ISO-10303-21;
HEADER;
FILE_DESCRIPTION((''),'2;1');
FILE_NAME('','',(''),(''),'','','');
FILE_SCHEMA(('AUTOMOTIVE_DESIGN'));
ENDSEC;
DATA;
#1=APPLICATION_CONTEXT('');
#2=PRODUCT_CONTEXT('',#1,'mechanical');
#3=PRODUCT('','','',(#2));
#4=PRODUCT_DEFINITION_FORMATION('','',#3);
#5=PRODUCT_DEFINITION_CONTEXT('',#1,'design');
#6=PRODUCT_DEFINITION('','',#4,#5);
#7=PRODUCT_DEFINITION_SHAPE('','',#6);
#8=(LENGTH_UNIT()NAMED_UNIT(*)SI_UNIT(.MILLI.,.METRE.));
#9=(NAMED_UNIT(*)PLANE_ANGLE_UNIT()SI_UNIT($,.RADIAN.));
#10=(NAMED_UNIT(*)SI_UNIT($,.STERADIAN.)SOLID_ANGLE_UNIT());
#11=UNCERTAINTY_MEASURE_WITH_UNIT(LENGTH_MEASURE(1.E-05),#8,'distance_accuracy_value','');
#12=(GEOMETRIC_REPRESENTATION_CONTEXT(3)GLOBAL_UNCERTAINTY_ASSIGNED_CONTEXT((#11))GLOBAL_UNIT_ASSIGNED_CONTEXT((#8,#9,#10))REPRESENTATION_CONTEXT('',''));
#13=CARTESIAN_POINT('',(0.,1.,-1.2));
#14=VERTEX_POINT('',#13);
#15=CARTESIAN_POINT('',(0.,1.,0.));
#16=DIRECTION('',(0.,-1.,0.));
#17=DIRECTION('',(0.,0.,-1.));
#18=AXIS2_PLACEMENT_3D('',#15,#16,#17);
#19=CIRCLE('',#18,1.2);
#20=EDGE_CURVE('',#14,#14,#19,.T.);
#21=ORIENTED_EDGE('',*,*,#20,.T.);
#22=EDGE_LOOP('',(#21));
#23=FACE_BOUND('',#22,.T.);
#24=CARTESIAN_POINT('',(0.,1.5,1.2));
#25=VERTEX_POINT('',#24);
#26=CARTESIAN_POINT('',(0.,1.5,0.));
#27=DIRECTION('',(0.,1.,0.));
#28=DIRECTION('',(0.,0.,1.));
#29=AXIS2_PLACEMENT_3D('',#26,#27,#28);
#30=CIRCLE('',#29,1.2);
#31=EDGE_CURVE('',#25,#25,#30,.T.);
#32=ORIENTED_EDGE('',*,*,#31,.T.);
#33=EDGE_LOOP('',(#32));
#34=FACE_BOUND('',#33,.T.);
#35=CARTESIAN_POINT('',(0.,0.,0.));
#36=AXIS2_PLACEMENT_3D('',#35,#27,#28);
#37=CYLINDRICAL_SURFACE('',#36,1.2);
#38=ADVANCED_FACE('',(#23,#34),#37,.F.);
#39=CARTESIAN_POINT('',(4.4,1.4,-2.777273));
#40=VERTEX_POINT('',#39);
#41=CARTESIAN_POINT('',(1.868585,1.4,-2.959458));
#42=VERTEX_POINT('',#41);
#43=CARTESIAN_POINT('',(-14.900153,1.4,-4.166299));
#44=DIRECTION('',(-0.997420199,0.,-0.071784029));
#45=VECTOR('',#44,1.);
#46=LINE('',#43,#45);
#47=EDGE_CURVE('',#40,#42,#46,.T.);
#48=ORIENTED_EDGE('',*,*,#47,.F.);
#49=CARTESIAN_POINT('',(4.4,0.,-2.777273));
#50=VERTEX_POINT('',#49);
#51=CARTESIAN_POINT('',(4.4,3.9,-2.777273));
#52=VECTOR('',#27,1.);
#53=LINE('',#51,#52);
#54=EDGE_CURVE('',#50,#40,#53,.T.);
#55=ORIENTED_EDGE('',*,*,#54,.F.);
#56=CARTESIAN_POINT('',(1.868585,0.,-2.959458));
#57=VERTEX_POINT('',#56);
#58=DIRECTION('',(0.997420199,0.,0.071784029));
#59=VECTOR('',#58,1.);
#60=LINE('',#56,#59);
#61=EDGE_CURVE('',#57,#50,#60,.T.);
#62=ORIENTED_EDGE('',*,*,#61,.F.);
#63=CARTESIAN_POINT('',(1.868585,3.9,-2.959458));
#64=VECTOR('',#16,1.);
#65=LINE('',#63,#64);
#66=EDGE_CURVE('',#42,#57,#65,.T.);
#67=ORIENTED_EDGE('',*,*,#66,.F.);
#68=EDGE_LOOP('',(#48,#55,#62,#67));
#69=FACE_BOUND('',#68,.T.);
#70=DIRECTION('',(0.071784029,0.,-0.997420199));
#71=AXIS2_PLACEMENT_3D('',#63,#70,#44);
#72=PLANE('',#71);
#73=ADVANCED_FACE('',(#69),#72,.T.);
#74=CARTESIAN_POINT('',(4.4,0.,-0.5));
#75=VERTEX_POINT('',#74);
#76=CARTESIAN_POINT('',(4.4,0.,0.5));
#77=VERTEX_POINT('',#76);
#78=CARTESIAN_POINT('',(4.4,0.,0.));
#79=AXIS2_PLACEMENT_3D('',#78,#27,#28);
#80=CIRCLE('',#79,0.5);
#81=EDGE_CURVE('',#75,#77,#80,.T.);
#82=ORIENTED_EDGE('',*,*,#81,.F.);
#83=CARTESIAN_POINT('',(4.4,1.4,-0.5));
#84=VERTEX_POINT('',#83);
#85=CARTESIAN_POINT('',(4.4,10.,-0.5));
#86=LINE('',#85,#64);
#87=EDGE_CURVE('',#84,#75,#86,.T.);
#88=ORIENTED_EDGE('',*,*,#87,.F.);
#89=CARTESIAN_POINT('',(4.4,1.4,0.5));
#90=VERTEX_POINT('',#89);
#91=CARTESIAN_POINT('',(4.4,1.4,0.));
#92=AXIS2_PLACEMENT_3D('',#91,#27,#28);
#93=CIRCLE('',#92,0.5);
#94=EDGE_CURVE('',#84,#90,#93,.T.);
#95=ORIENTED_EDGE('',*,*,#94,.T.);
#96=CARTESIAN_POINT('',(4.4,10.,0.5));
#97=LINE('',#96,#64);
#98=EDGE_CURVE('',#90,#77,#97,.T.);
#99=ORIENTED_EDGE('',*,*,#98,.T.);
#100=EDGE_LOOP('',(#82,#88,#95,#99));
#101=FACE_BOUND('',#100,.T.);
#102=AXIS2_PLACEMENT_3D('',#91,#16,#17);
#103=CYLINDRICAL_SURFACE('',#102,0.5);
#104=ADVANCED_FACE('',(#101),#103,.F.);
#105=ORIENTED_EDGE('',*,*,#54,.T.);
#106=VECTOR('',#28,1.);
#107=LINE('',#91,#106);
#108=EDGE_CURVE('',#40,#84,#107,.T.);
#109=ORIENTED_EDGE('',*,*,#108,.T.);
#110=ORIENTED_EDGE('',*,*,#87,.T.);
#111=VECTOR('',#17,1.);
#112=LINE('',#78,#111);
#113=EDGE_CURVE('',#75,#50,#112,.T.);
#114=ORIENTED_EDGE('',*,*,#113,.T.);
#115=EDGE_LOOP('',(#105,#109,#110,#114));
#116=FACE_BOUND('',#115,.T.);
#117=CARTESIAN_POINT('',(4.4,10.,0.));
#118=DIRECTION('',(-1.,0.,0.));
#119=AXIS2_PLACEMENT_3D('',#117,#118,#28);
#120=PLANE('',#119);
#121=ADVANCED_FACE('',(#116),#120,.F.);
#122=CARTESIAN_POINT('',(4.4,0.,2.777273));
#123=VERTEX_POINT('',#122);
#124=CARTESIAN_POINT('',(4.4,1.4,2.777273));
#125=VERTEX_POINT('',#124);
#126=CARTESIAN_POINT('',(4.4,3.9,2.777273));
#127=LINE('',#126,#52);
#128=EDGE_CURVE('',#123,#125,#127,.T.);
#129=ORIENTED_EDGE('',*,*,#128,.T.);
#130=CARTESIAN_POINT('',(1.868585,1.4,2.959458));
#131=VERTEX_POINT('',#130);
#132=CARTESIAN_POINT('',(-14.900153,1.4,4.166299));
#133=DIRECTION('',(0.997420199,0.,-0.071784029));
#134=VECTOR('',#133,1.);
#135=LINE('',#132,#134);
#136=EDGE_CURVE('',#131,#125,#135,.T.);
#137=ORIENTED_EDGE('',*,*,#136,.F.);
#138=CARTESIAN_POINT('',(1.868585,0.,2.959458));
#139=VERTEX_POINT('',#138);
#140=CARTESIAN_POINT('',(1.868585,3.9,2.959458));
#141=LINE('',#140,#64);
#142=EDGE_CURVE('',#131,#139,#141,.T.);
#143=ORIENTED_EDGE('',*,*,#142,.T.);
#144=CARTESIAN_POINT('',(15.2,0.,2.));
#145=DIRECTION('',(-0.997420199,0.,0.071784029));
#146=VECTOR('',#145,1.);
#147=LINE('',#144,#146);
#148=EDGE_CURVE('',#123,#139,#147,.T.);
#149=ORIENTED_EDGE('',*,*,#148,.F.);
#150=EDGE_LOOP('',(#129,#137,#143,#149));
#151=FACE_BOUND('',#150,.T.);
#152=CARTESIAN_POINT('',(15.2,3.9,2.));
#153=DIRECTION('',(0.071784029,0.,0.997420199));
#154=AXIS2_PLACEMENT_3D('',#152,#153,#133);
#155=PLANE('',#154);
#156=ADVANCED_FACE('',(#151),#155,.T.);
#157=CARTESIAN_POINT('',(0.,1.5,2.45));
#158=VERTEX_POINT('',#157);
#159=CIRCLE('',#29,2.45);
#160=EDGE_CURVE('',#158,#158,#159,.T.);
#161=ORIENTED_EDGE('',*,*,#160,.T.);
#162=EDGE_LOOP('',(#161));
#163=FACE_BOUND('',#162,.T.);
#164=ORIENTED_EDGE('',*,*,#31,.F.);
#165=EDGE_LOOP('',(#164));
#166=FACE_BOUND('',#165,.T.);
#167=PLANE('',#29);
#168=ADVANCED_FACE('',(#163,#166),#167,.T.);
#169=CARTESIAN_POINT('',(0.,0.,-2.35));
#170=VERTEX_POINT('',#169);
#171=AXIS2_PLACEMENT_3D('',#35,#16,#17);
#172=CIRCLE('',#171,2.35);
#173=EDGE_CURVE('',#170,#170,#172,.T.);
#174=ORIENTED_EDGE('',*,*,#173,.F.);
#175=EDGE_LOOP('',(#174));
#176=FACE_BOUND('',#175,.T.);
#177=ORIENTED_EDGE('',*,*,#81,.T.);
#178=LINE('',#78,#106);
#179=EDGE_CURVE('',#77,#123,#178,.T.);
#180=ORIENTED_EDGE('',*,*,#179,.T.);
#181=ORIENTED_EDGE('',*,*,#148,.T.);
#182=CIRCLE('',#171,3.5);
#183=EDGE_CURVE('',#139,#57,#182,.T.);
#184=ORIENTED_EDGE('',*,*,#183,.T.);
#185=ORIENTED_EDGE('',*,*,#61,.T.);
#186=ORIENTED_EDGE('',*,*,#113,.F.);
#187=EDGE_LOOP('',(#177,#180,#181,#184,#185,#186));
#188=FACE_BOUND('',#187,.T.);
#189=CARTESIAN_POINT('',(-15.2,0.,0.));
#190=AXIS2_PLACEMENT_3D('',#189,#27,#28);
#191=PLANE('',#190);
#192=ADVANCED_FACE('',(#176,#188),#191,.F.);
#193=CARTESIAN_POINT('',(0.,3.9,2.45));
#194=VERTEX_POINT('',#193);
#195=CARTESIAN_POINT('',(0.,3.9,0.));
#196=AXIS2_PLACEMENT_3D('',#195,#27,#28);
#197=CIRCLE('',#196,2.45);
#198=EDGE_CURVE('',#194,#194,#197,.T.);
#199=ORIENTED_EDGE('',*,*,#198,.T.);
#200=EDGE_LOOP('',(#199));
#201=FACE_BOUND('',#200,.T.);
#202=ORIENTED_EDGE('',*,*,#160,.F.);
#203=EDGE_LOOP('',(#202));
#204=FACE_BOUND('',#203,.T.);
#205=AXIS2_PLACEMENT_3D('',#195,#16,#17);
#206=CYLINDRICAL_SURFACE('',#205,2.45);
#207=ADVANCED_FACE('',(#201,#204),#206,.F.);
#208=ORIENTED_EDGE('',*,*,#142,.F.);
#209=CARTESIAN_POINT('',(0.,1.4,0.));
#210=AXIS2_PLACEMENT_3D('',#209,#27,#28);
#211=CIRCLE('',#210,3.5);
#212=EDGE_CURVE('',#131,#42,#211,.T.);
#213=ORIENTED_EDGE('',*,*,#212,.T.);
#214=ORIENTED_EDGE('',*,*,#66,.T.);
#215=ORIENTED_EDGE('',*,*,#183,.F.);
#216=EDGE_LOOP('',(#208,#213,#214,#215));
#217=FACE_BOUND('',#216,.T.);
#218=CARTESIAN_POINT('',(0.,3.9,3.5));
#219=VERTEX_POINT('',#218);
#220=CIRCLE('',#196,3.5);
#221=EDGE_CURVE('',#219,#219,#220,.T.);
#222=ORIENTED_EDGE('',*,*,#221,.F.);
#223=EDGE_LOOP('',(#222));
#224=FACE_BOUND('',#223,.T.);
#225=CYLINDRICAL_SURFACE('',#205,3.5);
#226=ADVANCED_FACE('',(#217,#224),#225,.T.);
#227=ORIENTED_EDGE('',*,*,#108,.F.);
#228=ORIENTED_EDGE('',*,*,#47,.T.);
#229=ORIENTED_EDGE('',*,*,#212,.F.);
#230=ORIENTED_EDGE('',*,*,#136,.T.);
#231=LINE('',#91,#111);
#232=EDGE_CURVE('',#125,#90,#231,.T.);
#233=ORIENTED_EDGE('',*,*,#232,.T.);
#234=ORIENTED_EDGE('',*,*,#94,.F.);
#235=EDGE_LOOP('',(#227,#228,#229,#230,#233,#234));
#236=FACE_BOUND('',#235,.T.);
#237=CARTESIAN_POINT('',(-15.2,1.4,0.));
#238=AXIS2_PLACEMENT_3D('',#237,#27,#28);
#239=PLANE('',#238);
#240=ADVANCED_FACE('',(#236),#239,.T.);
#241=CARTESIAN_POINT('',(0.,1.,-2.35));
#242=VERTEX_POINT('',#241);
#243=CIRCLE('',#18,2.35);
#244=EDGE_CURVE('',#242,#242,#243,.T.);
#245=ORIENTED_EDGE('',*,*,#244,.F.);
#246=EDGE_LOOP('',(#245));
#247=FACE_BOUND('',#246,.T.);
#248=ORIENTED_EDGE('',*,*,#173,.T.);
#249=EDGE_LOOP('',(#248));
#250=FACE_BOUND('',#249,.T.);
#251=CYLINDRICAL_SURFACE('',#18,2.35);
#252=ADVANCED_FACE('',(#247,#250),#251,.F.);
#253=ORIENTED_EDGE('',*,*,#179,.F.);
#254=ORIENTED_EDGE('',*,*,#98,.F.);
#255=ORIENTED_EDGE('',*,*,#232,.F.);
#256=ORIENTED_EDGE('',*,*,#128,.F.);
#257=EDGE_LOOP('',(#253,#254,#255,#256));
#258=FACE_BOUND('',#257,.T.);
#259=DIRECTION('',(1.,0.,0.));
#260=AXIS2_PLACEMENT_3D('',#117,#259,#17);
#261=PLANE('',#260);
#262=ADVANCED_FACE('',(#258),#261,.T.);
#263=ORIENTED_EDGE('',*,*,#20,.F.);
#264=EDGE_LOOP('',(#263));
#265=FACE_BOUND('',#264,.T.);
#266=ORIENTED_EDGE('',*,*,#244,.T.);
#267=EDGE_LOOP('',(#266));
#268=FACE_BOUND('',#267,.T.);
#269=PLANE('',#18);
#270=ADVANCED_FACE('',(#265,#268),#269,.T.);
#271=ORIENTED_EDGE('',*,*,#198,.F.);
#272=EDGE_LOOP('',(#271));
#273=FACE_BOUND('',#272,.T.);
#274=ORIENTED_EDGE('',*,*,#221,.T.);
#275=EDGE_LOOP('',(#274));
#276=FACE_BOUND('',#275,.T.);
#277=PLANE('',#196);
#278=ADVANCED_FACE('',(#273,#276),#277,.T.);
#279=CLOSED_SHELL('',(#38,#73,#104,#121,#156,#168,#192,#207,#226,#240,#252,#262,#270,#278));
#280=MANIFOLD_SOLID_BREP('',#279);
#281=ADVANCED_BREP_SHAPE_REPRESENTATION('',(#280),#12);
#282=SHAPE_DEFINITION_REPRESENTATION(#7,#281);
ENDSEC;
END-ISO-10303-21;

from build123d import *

# Parameters (mm, degrees)
SKETCH1_R               = 0.5
BOSS_EXTRUDE1_DEPTH     = 1.4
SKETCH2_R               = 2.35
CUT_EXTRUDE1_DEPTH      = 1
SKETCH3_R               = 3.5
SKETCH3_R_2             = 2.45
BOSS_EXTRUDE2_DEPTH     = 2.5
SKETCH4_R               = 1.2
CUT_EXTRUDE2_DEPTH      = 20.282440198
SKETCH5_R               = 2.45
SKETCH5_R_2             = 1.2
BOSS_EXTRUDE3_DEPTH     = 0.1
SKETCH6_W               = 35.735260114
SKETCH6_H               = 17.672039004
CUT_EXTRUDE4_DEPTH      = 20.513392837
CUT_EXTRUDE5_DEPTH      = 18.980545042
CUT_EXTRUDE_START       = -1.4
CUT_EXTRUDE_1_OUTLINE_R = 0.5
CUT_EXTRUDE_1_DEPTH     = 1.4


# Read off the part's stored shape, not the designer's step: 切除-拉伸-薄壁1
with BuildPart() as part:
    # Sketch1 → Boss-Extrude1 (new body)
    with BuildSketch(Plane(origin=(0, 0, 0), x_dir=(1, 0, 0), z_dir=(0, 1, 0))):
        with BuildLine():
            Line((-15.2, 2), (-2, 2.95))
            Line((-2, 2.95), (-2, 6.35))
            ThreePointArc((-2, 6.35), (0, 8.35), (2, 6.35))
            Line((2, 6.35), (2, 3.5))
            Line((2, 3.5), (15.2, 2))
            ThreePointArc((15.2, 2), (17.2, 0), (15.2, -2))
            Line((15.2, -2), (2, -3.5))
            Line((2, -3.5), (2, -6.35))
            ThreePointArc((2, -6.35), (0, -8.35), (-2, -6.35))
            Line((-2, -6.35), (-2, -2.95))
            Line((-2, -2.95), (-15.2, -2))
            ThreePointArc((-15.2, -2), (-17.2, 0), (-15.2, 2))
        make_face()
        with Locations((0, 6.35)):
            Circle(SKETCH1_R, mode=Mode.SUBTRACT)
        with Locations((0, 4.55)):
            Circle(SKETCH1_R, mode=Mode.SUBTRACT)
        with Locations((0, -4.55)):
            Circle(SKETCH1_R, mode=Mode.SUBTRACT)
        with Locations((0, -6.35)):
            Circle(SKETCH1_R, mode=Mode.SUBTRACT)
        with Locations((-15.2, 0)):
            Circle(SKETCH1_R, mode=Mode.SUBTRACT)
        with Locations(Location((15.2, 0, 0), (0, 0, 270))):
            Circle(SKETCH1_R, mode=Mode.SUBTRACT)
        with Locations((-13.4, 0)):
            Circle(SKETCH1_R, mode=Mode.SUBTRACT)
        with Locations((-11.6, 0)):
            Circle(SKETCH1_R, mode=Mode.SUBTRACT)
        with Locations((-9.8, 0)):
            Circle(SKETCH1_R, mode=Mode.SUBTRACT)
        with Locations((-8, 0)):
            Circle(SKETCH1_R, mode=Mode.SUBTRACT)
        with Locations((-6.2, 0)):
            Circle(SKETCH1_R, mode=Mode.SUBTRACT)
        with Locations((-4.4, 0)):
            Circle(SKETCH1_R, mode=Mode.SUBTRACT)
        with Locations(Location((13.4, 0, 0), (0, 0, 270))):
            Circle(SKETCH1_R, mode=Mode.SUBTRACT)
        with Locations(Location((11.6, 0, 0), (0, 0, 270))):
            Circle(SKETCH1_R, mode=Mode.SUBTRACT)
        with Locations(Location((9.8, 0, 0), (0, 0, 270))):
            Circle(SKETCH1_R, mode=Mode.SUBTRACT)
        with Locations(Location((8, 0, 0), (0, 0, 270))):
            Circle(SKETCH1_R, mode=Mode.SUBTRACT)
        with Locations(Location((6.2, 0, 0), (0, 0, 270))):
            Circle(SKETCH1_R, mode=Mode.SUBTRACT)
        with Locations(Location((4.4, 0, 0), (0, 0, 270))):
            Circle(SKETCH1_R, mode=Mode.SUBTRACT)
    extrude(amount=BOSS_EXTRUDE1_DEPTH)

    # Sketch2 → Cut-Extrude1 (cut)
    with BuildSketch(Plane.XZ):
        with Locations(Location((0, 0, 0), (0, 0, 270))):
            Circle(SKETCH2_R)
    extrude(amount=-CUT_EXTRUDE1_DEPTH, mode=Mode.SUBTRACT)

    # Sketch3 → Boss-Extrude2 (add)
    with BuildSketch(Plane(origin=(0, 1.4, 0), x_dir=(1, 0, 0), z_dir=(0, 1, 0))):
        with Locations(Location((0, 0, 0), (0, 0, 57.731921145))):
            Circle(SKETCH3_R)
        with Locations(Location((0, 0, 0), (0, 0, 270))):
            Circle(SKETCH3_R_2, mode=Mode.SUBTRACT)
    extrude(amount=BOSS_EXTRUDE2_DEPTH)

    # Sketch4 → Cut-Extrude2 (cut, through all)
    with BuildSketch(Plane(origin=(0, 1.4, 0), x_dir=(1, 0, 0), z_dir=(0, 1, 0))):
        with Locations(Location((0, 0, 0), (0, 0, 270))):
            Circle(SKETCH4_R)
    extrude(amount=-CUT_EXTRUDE2_DEPTH, mode=Mode.SUBTRACT)

    # Sketch5 → Boss-Extrude3 (add)
    with BuildSketch(Plane(origin=(0, 1.4, 0), x_dir=(1, 0, 0), z_dir=(0, 1, 0))):
        with Locations(Location((0, 0, 0), (0, 0, 270))):
            Circle(SKETCH5_R)
        with Locations(Location((0, 0, 0), (0, 0, 270))):
            Circle(SKETCH5_R_2, mode=Mode.SUBTRACT)
    extrude(amount=BOSS_EXTRUDE3_DEPTH)

    # Sketch6 → Cut-Extrude4 (cut, through all)
    with BuildSketch(Plane.XZ):
        Rectangle(SKETCH6_W, SKETCH6_H)
        with BuildLine():
            Line((-1.868584713, -2.959457918), (-15.2, -2))
            ThreePointArc((-15.2, -2), (-17.2, 0), (-15.2, 2))
            Line((-15.2, 2), (-1.868584713, 2.959457918))
            ThreePointArc((-1.868584713, 2.959457918), (0, 3.5), (1.868584713, 2.959457918))
            Line((1.868584713, 2.959457918), (15.2, 2))
            ThreePointArc((15.2, 2), (17.2, 0), (15.2, -2))
            Line((15.2, -2), (1.868584713, -2.959457918))
            ThreePointArc((1.868584713, -2.959457918), (0, -3.5), (-1.868584713, -2.959457918))
        make_face(mode=Mode.SUBTRACT)
    extrude(amount=-CUT_EXTRUDE4_DEPTH, mode=Mode.SUBTRACT)

    # Sketch7 → Cut-Extrude5 (cut, through all)
    with BuildSketch(Plane.XZ):
        with BuildLine():
            Line((0, 3.5), (-17.731768104, 3.5))
            Line((-17.731768104, 3.5), (-17.731768104, -3.5))
            Line((-17.731768104, -3.5), (0, -3.5))
            ThreePointArc((0, -3.5), (-3.5, 0), (0, 3.5))
        make_face()
    extrude(amount=-CUT_EXTRUDE5_DEPTH, mode=Mode.SUBTRACT)

    # 切除-拉伸-薄壁1 outline → 切除-拉伸-薄壁1 (cut)
    with BuildSketch(Plane(origin=(0, 0, 0), x_dir=(-1, 0, 0), z_dir=(0, -1, 0)).offset(CUT_EXTRUDE_START)):
        with BuildLine():
            Line((-4.4, -2.777272727), (-4.4, -0.5))
            ThreePointArc((-4.4, -0.5), (-4.9, 0), (-4.4, 0.5))
            Line((-4.4, 0.5), (-4.4, 2.777272727))
            Line((-4.4, 2.777272727), (-15.2, 2))
            ThreePointArc((-15.2, 2), (-17.2, 0), (-15.2, -2))
            Line((-15.2, -2), (-4.4, -2.777272727))
        make_face()
        with Locations((-15.2, 0)):
            Circle(CUT_EXTRUDE_1_OUTLINE_R, mode=Mode.SUBTRACT)
        with Locations((-13.4, 0)):
            Circle(CUT_EXTRUDE_1_OUTLINE_R, mode=Mode.SUBTRACT)
        with Locations((-11.6, 0)):
            Circle(CUT_EXTRUDE_1_OUTLINE_R, mode=Mode.SUBTRACT)
        with Locations((-9.8, 0)):
            Circle(CUT_EXTRUDE_1_OUTLINE_R, mode=Mode.SUBTRACT)
        with Locations((-8, 0)):
            Circle(CUT_EXTRUDE_1_OUTLINE_R, mode=Mode.SUBTRACT)
        with Locations((-6.2, 0)):
            Circle(CUT_EXTRUDE_1_OUTLINE_R, mode=Mode.SUBTRACT)
    extrude(amount=CUT_EXTRUDE_1_DEPTH, mode=Mode.SUBTRACT)


solid = part.part
